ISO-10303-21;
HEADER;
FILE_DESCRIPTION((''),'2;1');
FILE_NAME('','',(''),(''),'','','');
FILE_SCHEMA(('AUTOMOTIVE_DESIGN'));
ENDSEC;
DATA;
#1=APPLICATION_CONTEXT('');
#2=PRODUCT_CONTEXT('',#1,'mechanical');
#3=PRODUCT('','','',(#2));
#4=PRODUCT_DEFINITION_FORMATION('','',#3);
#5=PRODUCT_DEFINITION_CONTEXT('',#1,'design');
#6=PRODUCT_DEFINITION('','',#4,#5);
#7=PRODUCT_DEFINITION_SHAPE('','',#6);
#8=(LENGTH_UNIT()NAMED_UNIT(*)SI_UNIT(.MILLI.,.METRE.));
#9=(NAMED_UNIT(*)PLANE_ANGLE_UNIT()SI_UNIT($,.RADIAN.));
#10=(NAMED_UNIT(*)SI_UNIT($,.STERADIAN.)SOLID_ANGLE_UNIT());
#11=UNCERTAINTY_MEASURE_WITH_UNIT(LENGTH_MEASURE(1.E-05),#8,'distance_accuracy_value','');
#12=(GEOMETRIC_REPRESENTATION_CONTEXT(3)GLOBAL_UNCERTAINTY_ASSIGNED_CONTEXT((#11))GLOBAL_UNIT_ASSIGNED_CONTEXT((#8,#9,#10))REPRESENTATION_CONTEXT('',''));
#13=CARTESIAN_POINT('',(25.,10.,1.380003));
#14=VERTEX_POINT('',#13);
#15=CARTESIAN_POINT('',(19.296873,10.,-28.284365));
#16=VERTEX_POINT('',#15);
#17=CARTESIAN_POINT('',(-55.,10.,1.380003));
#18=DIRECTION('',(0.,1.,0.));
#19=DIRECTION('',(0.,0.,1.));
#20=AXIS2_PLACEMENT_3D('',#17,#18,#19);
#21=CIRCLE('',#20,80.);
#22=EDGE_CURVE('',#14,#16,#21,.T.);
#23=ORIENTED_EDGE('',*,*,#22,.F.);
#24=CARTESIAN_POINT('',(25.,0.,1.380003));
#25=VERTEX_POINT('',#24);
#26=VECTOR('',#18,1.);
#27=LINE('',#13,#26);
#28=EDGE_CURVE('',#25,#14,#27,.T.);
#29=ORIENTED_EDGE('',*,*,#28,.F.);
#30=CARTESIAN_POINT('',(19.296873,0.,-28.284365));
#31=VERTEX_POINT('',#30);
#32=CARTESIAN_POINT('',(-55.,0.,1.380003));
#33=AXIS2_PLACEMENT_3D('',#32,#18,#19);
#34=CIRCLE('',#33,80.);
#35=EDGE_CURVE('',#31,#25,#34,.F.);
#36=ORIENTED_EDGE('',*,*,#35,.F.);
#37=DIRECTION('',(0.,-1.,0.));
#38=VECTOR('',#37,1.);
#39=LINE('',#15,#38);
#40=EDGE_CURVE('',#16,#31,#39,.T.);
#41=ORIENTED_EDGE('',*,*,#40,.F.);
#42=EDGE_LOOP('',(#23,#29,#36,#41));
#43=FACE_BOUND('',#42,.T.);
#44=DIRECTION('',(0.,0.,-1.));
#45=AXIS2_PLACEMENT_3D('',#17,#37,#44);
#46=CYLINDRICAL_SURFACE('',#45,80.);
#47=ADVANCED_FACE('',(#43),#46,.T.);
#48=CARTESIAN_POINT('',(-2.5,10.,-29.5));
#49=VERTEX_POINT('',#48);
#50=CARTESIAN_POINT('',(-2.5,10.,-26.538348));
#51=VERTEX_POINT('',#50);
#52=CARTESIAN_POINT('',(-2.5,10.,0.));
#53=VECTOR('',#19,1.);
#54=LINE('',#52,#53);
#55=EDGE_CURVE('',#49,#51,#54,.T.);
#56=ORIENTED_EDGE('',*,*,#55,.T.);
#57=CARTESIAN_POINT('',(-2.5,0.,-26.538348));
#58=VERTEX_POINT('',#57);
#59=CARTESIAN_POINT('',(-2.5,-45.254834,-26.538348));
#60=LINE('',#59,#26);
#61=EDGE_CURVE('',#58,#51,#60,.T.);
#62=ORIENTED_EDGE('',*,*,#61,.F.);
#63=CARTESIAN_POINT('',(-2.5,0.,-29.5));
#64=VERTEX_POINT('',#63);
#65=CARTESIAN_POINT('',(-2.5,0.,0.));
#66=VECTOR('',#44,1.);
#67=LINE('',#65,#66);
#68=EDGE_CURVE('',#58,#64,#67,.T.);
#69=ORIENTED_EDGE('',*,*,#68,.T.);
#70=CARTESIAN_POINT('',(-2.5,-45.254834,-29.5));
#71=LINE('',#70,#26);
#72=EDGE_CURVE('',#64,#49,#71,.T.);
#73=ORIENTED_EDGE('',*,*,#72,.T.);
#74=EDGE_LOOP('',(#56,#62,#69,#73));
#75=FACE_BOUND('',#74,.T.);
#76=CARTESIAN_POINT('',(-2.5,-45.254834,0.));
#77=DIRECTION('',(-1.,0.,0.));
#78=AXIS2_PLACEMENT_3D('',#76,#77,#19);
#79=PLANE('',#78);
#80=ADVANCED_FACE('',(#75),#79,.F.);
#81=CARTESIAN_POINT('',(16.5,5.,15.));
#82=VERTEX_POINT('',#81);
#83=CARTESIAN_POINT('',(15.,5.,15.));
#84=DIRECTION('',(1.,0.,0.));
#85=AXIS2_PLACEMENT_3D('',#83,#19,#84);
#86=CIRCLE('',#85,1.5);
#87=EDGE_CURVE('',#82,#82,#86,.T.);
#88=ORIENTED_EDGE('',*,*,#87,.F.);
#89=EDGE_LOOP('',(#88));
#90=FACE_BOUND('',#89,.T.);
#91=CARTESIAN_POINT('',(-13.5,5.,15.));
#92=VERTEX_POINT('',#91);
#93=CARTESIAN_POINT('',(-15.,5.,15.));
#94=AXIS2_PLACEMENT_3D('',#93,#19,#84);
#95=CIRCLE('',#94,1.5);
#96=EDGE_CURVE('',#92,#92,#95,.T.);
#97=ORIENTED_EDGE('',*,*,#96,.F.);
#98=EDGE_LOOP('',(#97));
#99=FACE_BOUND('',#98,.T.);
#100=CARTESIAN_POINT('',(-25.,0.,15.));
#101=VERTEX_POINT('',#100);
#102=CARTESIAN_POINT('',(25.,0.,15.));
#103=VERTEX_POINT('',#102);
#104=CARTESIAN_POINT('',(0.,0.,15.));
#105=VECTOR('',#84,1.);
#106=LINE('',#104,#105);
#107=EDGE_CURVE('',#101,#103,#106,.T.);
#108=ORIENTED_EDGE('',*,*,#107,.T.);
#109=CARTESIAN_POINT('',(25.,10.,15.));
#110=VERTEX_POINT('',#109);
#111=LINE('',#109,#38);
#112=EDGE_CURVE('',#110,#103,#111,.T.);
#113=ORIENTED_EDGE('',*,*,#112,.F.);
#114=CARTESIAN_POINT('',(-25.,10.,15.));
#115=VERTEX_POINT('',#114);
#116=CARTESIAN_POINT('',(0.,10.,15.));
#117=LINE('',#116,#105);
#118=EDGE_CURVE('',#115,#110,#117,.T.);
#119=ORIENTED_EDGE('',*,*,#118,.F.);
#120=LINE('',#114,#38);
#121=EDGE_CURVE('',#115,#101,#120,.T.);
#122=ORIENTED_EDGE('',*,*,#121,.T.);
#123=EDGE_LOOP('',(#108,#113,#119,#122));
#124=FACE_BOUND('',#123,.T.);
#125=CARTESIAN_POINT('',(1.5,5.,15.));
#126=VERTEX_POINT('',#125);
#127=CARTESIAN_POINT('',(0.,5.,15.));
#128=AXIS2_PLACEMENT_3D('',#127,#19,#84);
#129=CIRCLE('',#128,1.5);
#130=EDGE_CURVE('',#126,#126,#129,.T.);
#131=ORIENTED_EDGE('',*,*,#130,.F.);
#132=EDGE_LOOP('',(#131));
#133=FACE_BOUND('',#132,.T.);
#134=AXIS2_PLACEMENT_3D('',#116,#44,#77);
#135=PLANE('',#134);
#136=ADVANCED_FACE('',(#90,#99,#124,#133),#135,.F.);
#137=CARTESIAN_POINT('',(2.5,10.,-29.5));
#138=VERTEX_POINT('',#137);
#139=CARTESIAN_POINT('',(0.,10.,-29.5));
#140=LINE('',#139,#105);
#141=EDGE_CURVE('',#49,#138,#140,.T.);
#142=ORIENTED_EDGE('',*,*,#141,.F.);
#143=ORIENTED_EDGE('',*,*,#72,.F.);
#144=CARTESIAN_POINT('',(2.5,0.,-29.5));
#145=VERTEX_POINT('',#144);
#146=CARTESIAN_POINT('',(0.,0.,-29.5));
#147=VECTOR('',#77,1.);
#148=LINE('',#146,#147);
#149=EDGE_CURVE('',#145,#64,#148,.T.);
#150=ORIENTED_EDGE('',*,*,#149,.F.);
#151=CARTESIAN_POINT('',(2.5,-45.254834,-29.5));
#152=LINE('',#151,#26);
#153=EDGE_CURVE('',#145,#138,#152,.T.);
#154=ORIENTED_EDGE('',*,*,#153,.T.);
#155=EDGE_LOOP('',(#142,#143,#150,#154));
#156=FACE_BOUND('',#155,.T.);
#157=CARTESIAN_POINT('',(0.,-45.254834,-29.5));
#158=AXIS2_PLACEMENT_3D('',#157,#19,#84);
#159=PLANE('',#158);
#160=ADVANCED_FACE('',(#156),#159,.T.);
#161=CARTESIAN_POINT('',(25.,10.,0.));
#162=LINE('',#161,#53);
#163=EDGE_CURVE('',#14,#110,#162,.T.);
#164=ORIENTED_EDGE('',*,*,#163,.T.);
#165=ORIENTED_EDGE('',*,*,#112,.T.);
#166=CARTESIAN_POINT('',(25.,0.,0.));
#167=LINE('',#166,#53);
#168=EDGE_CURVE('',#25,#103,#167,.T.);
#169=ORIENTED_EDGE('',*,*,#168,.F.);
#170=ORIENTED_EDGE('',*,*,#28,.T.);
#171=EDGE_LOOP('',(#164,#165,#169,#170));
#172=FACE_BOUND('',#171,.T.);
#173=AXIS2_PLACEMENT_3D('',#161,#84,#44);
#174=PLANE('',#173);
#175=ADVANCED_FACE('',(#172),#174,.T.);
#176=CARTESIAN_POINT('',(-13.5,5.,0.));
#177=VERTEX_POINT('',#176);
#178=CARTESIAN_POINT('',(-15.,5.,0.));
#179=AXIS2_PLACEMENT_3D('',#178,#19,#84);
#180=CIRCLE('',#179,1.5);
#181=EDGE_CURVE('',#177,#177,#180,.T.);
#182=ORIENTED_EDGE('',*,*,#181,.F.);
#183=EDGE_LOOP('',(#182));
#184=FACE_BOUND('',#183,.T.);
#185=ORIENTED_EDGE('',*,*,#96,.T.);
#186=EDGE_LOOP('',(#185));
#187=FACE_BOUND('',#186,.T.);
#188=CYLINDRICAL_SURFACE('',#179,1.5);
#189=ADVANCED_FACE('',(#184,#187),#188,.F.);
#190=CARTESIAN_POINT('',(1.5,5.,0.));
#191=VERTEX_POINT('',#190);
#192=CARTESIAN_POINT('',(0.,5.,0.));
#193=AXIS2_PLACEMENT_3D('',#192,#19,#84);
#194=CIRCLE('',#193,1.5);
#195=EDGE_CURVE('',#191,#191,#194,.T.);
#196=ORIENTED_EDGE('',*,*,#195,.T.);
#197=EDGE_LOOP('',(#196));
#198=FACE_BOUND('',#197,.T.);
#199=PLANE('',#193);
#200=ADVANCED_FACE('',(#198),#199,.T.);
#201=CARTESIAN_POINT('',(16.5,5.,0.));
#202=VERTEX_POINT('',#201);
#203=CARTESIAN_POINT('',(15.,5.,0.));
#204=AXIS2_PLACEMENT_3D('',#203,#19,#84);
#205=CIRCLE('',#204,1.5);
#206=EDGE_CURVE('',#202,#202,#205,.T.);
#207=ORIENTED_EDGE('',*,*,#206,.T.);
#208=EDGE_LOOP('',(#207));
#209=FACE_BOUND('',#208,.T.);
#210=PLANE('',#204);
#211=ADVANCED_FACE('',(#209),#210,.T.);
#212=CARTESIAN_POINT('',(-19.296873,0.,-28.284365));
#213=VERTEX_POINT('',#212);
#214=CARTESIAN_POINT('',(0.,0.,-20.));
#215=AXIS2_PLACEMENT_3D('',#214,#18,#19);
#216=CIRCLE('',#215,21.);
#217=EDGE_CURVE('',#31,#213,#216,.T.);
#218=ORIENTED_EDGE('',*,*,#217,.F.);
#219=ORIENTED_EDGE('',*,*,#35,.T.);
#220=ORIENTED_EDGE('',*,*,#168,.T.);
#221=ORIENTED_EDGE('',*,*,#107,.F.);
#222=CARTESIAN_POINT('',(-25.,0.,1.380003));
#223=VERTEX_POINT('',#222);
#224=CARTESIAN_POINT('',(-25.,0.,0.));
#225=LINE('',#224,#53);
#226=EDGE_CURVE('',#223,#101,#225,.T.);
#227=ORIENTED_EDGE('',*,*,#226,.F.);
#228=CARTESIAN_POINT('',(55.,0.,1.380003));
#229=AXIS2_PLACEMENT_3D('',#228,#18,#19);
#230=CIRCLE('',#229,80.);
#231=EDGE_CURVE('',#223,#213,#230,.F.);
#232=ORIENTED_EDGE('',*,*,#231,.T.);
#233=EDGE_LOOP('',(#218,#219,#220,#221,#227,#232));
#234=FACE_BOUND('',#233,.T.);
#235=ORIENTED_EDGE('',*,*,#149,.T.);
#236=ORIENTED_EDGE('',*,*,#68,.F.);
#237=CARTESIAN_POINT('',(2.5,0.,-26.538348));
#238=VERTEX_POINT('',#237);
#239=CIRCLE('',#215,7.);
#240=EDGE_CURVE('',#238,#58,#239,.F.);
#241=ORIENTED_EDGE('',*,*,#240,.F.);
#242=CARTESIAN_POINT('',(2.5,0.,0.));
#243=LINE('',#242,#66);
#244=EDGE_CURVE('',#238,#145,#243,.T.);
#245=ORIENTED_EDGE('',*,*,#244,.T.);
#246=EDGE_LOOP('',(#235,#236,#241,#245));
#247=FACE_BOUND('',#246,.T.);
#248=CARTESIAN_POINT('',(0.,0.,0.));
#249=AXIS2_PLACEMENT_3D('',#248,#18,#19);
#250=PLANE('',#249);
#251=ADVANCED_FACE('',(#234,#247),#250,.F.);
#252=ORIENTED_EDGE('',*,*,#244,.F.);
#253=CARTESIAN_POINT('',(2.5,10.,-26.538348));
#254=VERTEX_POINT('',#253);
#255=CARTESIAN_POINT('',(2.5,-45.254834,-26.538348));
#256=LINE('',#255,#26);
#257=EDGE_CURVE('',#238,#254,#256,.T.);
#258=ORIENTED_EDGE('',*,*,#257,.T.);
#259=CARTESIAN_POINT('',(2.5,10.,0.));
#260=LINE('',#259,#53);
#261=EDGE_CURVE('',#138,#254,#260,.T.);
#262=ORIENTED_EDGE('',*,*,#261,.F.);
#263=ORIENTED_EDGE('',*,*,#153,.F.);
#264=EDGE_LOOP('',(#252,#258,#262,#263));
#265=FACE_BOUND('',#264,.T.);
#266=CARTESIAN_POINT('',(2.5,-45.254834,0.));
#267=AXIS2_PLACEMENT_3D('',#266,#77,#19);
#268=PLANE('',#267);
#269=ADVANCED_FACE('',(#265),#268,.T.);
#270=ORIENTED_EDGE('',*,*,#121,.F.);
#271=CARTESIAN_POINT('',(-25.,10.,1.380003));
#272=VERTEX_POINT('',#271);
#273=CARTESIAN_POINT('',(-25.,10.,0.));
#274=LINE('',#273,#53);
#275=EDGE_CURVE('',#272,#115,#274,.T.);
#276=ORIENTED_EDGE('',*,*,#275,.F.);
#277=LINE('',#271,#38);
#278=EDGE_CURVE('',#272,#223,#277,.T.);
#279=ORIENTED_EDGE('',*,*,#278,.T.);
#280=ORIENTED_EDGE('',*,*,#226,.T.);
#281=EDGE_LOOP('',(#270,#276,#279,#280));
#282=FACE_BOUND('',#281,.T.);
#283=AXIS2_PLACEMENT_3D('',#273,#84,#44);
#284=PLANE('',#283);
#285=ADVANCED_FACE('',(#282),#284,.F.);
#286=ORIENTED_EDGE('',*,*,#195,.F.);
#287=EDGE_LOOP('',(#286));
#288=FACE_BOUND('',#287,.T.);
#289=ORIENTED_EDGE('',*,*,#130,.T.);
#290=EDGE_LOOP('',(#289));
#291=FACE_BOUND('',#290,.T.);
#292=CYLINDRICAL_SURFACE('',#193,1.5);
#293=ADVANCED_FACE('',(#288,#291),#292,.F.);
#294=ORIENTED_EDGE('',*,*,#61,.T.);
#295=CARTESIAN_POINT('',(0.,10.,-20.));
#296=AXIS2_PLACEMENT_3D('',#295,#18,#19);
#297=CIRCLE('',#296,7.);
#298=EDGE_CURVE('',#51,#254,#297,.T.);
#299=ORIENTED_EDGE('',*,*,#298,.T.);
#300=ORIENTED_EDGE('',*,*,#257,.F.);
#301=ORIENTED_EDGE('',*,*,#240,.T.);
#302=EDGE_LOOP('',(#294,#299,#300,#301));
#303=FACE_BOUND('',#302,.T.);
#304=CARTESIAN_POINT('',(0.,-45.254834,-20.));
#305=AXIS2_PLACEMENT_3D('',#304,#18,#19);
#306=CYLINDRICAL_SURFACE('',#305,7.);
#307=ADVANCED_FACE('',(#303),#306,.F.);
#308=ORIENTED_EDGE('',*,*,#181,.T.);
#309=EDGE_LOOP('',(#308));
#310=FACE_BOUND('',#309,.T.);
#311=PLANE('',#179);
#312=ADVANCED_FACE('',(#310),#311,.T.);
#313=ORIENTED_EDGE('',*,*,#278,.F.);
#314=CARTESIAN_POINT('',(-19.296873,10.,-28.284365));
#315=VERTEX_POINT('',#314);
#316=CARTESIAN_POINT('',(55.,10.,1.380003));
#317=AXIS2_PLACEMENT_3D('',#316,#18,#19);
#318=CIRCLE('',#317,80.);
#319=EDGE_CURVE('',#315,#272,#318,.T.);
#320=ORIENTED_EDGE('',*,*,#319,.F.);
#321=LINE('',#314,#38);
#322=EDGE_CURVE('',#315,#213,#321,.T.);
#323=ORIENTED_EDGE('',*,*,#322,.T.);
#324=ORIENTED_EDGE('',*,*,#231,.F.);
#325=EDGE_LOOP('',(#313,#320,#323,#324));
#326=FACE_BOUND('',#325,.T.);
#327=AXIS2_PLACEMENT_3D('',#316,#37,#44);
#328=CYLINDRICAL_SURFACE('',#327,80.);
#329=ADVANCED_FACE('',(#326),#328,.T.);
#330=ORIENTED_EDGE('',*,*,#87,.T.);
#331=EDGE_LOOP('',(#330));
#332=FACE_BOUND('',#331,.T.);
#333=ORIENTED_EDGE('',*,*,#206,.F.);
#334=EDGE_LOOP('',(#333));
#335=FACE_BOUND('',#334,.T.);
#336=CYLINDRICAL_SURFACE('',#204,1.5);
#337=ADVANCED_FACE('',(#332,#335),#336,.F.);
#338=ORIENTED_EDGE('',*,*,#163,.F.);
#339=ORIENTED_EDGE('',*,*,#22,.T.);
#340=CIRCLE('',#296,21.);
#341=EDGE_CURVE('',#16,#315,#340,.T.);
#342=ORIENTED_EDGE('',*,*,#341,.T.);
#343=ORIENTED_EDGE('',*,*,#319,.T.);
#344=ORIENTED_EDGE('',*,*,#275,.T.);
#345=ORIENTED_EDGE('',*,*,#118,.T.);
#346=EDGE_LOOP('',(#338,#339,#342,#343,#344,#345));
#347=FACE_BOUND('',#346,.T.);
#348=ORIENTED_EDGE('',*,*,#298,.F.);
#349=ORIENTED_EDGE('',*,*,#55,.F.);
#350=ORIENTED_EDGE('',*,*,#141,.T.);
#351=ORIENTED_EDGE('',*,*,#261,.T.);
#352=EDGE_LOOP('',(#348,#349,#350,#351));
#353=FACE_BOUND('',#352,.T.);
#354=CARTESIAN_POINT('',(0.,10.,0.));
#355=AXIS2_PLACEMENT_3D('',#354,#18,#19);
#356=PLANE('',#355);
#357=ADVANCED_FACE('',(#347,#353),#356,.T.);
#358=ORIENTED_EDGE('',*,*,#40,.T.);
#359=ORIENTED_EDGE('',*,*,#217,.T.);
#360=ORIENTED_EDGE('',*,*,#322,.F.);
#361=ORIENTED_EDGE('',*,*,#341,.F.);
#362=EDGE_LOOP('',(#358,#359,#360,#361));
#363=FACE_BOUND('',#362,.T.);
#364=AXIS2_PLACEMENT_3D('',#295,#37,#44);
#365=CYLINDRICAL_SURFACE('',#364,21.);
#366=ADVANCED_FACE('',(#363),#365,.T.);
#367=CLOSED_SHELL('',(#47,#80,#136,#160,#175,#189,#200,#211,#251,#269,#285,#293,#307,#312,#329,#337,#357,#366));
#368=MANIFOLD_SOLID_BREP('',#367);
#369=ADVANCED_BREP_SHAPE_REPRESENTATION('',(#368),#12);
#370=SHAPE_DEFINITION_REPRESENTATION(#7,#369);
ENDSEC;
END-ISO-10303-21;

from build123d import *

# Parameters (mm, degrees)
CROQUIS1_R              = 21
CROQUIS1_W              = 50
CROQUIS1_H              = 30
SALIENTE_EXTRUIR1_DEPTH = 10
CROQUIS2_R              = 16
CORTAR_EXTRUIR1_DEPTH   = 50.050993874
REDONDEO1_R             = 80
CROQUIS3_R              = 1.5
CORTAR_EXTRUIR2_DEPTH   = 15
MATRIZL1_COUNT          = 2
MATRIZL1_PITCH          = 15
MATRIZL1_COL_COUNT      = 2
MATRIZL1_COL_PITCH      = 15
SKETCH1_R               = 16
BOSS_EXTRUDE1_DEPTH     = 10


with BuildPart() as part:
    # Croquis1 → Saliente-Extruir1 (new body)
    with BuildSketch(Plane(origin=(0, 0, 0), x_dir=(1, 0, 0), z_dir=(0, 1, 0))):
        with Locations((0, 20)):
            Circle(CROQUIS1_R)
        Rectangle(CROQUIS1_W, CROQUIS1_H)
        with BuildLine():
            ThreePointArc((19.296872909, 28.284364546), (0, 41), (-19.296872909, 28.284364546))
            ThreePointArc((-19.296872909, 28.284364546), (-20.928477594, 21.731711756), (-20.396078054, 15))
            Line((-20.396078054, 15), (20.396078054, 15))
            ThreePointArc((20.396078054, 15), (20.848472835, 17.481829944), (21, 20))
            ThreePointArc((21, 20), (20.569811996, 24.228810052), (19.296872909, 28.284364546))
        make_face()
        with BuildLine():
            Line((20.396078054, 15), (-20.396078054, 15))
            ThreePointArc((-20.396078054, 15), (0, -1), (20.396078054, 15))
        make_face()
        with BuildLine():
            Line((25, 15), (19.296872909, 28.284364546))
            ThreePointArc((19.296872909, 28.284364546), (20.569811996, 24.228810052), (21, 20))
            ThreePointArc((21, 20), (20.848472835, 17.481829944), (20.396078054, 15))
            Line((20.396078054, 15), (25, 15))
        make_face()
        with BuildLine():
            Line((-19.296872909, 28.284364546), (-25, 15))
            Line((-25, 15), (-20.396078054, 15))
            ThreePointArc((-20.396078054, 15), (-20.928477594, 21.731711756), (-19.296872909, 28.284364546))
        make_face()
    extrude(amount=SALIENTE_EXTRUIR1_DEPTH)

    # Croquis2 → Cortar-Extruir1 (cut, through all)
    with BuildSketch(Plane(origin=(0, 10, 0), x_dir=(1, 0, 0), z_dir=(0, 1, 0))):
        with Locations(Location((0, 20, 0), (0, 0, 270))):
            Circle(CROQUIS2_R)
    extrude(amount=-CORTAR_EXTRUIR1_DEPTH, mode=Mode.SUBTRACT)

    # Redondeo1
    # the kernel refuses this fillet: 80 mm, written as the material it takes off along each edge
    with BuildSketch(Plane(origin=(25, -40.950006406, -15), x_dir=(-0.39449354980003665, 0, -0.9188987099600074), z_dir=(0, 1, 0))) as redondeo1_piece_1:
        with BuildLine():
            CenterArc((16.50792076, 79.973702153), REDONDEO1_R, 246.765608194, 21.765246915)
            Line((-15.051563224, 6.461805357), (0, 0))
            Line((0, 0), (14.456832295, 0))
        make_face()
    extrude(amount=91.900012811, mode=Mode.SUBTRACT)
    with BuildSketch(Plane(origin=(-25, -40.950006406, -15), x_dir=(0.39449354980003676, 0, -0.9188987099600074), z_dir=(0, 1, 0))) as redondeo1_piece_2:
        with BuildLine():
            CenterArc((16.50792076, -79.973702153), REDONDEO1_R, 91.46914489, 21.765246915)
            Line((-15.051563224, -6.461805357), (0, 0))
            Line((0, 0), (14.456832295, 0))
        make_face()
    extrude(amount=91.900012811, mode=Mode.SUBTRACT)

    # Croquis3 → Cortar-Extruir2 (cut)
    with BuildSketch(Plane.XY.offset(15)):
        with Locations((0, 5)):
            Circle(CROQUIS3_R)
    cortar_extruir2 = extrude(amount=-CORTAR_EXTRUIR2_DEPTH, mode=Mode.SUBTRACT)

    # MatrizL1: Cortar-Extruir2 ×2
    with Locations(*[(i * MATRIZL1_PITCH, 0, 0) for i in range(1, MATRIZL1_COUNT)]):
        add(cortar_extruir2, mode=Mode.SUBTRACT)

    # MatrizL1 col: Cortar-Extruir2 ×2
    with Locations(*[(-i * MATRIZL1_COL_PITCH, 0, 0) for i in range(1, MATRIZL1_COL_COUNT)]):
        add(cortar_extruir2, mode=Mode.SUBTRACT)

    # Sketch1 → Boss-Extrude1 (add)
    with BuildSketch(Plane(origin=(0, 10, 0), x_dir=(1, 0, 0), z_dir=(0, 1, 0))):
        with Locations((0, 20)):
            Circle(SKETCH1_R)
        with BuildLine():
            Line((-2.5, 26.538348415), (-2.5, 29.5))
            Line((-2.5, 29.5), (2.5, 29.5))
            Line((2.5, 29.5), (2.5, 26.538348415))
            ThreePointArc((2.5, 26.538348415), (5.766281297, 23.968626967), (7, 20))
            ThreePointArc((7, 20), (-3.968626967, 14.233718703), (-2.5, 26.538348415))
        make_face(mode=Mode.SUBTRACT)
    extrude(amount=-BOSS_EXTRUDE1_DEPTH)


solid = part.part
